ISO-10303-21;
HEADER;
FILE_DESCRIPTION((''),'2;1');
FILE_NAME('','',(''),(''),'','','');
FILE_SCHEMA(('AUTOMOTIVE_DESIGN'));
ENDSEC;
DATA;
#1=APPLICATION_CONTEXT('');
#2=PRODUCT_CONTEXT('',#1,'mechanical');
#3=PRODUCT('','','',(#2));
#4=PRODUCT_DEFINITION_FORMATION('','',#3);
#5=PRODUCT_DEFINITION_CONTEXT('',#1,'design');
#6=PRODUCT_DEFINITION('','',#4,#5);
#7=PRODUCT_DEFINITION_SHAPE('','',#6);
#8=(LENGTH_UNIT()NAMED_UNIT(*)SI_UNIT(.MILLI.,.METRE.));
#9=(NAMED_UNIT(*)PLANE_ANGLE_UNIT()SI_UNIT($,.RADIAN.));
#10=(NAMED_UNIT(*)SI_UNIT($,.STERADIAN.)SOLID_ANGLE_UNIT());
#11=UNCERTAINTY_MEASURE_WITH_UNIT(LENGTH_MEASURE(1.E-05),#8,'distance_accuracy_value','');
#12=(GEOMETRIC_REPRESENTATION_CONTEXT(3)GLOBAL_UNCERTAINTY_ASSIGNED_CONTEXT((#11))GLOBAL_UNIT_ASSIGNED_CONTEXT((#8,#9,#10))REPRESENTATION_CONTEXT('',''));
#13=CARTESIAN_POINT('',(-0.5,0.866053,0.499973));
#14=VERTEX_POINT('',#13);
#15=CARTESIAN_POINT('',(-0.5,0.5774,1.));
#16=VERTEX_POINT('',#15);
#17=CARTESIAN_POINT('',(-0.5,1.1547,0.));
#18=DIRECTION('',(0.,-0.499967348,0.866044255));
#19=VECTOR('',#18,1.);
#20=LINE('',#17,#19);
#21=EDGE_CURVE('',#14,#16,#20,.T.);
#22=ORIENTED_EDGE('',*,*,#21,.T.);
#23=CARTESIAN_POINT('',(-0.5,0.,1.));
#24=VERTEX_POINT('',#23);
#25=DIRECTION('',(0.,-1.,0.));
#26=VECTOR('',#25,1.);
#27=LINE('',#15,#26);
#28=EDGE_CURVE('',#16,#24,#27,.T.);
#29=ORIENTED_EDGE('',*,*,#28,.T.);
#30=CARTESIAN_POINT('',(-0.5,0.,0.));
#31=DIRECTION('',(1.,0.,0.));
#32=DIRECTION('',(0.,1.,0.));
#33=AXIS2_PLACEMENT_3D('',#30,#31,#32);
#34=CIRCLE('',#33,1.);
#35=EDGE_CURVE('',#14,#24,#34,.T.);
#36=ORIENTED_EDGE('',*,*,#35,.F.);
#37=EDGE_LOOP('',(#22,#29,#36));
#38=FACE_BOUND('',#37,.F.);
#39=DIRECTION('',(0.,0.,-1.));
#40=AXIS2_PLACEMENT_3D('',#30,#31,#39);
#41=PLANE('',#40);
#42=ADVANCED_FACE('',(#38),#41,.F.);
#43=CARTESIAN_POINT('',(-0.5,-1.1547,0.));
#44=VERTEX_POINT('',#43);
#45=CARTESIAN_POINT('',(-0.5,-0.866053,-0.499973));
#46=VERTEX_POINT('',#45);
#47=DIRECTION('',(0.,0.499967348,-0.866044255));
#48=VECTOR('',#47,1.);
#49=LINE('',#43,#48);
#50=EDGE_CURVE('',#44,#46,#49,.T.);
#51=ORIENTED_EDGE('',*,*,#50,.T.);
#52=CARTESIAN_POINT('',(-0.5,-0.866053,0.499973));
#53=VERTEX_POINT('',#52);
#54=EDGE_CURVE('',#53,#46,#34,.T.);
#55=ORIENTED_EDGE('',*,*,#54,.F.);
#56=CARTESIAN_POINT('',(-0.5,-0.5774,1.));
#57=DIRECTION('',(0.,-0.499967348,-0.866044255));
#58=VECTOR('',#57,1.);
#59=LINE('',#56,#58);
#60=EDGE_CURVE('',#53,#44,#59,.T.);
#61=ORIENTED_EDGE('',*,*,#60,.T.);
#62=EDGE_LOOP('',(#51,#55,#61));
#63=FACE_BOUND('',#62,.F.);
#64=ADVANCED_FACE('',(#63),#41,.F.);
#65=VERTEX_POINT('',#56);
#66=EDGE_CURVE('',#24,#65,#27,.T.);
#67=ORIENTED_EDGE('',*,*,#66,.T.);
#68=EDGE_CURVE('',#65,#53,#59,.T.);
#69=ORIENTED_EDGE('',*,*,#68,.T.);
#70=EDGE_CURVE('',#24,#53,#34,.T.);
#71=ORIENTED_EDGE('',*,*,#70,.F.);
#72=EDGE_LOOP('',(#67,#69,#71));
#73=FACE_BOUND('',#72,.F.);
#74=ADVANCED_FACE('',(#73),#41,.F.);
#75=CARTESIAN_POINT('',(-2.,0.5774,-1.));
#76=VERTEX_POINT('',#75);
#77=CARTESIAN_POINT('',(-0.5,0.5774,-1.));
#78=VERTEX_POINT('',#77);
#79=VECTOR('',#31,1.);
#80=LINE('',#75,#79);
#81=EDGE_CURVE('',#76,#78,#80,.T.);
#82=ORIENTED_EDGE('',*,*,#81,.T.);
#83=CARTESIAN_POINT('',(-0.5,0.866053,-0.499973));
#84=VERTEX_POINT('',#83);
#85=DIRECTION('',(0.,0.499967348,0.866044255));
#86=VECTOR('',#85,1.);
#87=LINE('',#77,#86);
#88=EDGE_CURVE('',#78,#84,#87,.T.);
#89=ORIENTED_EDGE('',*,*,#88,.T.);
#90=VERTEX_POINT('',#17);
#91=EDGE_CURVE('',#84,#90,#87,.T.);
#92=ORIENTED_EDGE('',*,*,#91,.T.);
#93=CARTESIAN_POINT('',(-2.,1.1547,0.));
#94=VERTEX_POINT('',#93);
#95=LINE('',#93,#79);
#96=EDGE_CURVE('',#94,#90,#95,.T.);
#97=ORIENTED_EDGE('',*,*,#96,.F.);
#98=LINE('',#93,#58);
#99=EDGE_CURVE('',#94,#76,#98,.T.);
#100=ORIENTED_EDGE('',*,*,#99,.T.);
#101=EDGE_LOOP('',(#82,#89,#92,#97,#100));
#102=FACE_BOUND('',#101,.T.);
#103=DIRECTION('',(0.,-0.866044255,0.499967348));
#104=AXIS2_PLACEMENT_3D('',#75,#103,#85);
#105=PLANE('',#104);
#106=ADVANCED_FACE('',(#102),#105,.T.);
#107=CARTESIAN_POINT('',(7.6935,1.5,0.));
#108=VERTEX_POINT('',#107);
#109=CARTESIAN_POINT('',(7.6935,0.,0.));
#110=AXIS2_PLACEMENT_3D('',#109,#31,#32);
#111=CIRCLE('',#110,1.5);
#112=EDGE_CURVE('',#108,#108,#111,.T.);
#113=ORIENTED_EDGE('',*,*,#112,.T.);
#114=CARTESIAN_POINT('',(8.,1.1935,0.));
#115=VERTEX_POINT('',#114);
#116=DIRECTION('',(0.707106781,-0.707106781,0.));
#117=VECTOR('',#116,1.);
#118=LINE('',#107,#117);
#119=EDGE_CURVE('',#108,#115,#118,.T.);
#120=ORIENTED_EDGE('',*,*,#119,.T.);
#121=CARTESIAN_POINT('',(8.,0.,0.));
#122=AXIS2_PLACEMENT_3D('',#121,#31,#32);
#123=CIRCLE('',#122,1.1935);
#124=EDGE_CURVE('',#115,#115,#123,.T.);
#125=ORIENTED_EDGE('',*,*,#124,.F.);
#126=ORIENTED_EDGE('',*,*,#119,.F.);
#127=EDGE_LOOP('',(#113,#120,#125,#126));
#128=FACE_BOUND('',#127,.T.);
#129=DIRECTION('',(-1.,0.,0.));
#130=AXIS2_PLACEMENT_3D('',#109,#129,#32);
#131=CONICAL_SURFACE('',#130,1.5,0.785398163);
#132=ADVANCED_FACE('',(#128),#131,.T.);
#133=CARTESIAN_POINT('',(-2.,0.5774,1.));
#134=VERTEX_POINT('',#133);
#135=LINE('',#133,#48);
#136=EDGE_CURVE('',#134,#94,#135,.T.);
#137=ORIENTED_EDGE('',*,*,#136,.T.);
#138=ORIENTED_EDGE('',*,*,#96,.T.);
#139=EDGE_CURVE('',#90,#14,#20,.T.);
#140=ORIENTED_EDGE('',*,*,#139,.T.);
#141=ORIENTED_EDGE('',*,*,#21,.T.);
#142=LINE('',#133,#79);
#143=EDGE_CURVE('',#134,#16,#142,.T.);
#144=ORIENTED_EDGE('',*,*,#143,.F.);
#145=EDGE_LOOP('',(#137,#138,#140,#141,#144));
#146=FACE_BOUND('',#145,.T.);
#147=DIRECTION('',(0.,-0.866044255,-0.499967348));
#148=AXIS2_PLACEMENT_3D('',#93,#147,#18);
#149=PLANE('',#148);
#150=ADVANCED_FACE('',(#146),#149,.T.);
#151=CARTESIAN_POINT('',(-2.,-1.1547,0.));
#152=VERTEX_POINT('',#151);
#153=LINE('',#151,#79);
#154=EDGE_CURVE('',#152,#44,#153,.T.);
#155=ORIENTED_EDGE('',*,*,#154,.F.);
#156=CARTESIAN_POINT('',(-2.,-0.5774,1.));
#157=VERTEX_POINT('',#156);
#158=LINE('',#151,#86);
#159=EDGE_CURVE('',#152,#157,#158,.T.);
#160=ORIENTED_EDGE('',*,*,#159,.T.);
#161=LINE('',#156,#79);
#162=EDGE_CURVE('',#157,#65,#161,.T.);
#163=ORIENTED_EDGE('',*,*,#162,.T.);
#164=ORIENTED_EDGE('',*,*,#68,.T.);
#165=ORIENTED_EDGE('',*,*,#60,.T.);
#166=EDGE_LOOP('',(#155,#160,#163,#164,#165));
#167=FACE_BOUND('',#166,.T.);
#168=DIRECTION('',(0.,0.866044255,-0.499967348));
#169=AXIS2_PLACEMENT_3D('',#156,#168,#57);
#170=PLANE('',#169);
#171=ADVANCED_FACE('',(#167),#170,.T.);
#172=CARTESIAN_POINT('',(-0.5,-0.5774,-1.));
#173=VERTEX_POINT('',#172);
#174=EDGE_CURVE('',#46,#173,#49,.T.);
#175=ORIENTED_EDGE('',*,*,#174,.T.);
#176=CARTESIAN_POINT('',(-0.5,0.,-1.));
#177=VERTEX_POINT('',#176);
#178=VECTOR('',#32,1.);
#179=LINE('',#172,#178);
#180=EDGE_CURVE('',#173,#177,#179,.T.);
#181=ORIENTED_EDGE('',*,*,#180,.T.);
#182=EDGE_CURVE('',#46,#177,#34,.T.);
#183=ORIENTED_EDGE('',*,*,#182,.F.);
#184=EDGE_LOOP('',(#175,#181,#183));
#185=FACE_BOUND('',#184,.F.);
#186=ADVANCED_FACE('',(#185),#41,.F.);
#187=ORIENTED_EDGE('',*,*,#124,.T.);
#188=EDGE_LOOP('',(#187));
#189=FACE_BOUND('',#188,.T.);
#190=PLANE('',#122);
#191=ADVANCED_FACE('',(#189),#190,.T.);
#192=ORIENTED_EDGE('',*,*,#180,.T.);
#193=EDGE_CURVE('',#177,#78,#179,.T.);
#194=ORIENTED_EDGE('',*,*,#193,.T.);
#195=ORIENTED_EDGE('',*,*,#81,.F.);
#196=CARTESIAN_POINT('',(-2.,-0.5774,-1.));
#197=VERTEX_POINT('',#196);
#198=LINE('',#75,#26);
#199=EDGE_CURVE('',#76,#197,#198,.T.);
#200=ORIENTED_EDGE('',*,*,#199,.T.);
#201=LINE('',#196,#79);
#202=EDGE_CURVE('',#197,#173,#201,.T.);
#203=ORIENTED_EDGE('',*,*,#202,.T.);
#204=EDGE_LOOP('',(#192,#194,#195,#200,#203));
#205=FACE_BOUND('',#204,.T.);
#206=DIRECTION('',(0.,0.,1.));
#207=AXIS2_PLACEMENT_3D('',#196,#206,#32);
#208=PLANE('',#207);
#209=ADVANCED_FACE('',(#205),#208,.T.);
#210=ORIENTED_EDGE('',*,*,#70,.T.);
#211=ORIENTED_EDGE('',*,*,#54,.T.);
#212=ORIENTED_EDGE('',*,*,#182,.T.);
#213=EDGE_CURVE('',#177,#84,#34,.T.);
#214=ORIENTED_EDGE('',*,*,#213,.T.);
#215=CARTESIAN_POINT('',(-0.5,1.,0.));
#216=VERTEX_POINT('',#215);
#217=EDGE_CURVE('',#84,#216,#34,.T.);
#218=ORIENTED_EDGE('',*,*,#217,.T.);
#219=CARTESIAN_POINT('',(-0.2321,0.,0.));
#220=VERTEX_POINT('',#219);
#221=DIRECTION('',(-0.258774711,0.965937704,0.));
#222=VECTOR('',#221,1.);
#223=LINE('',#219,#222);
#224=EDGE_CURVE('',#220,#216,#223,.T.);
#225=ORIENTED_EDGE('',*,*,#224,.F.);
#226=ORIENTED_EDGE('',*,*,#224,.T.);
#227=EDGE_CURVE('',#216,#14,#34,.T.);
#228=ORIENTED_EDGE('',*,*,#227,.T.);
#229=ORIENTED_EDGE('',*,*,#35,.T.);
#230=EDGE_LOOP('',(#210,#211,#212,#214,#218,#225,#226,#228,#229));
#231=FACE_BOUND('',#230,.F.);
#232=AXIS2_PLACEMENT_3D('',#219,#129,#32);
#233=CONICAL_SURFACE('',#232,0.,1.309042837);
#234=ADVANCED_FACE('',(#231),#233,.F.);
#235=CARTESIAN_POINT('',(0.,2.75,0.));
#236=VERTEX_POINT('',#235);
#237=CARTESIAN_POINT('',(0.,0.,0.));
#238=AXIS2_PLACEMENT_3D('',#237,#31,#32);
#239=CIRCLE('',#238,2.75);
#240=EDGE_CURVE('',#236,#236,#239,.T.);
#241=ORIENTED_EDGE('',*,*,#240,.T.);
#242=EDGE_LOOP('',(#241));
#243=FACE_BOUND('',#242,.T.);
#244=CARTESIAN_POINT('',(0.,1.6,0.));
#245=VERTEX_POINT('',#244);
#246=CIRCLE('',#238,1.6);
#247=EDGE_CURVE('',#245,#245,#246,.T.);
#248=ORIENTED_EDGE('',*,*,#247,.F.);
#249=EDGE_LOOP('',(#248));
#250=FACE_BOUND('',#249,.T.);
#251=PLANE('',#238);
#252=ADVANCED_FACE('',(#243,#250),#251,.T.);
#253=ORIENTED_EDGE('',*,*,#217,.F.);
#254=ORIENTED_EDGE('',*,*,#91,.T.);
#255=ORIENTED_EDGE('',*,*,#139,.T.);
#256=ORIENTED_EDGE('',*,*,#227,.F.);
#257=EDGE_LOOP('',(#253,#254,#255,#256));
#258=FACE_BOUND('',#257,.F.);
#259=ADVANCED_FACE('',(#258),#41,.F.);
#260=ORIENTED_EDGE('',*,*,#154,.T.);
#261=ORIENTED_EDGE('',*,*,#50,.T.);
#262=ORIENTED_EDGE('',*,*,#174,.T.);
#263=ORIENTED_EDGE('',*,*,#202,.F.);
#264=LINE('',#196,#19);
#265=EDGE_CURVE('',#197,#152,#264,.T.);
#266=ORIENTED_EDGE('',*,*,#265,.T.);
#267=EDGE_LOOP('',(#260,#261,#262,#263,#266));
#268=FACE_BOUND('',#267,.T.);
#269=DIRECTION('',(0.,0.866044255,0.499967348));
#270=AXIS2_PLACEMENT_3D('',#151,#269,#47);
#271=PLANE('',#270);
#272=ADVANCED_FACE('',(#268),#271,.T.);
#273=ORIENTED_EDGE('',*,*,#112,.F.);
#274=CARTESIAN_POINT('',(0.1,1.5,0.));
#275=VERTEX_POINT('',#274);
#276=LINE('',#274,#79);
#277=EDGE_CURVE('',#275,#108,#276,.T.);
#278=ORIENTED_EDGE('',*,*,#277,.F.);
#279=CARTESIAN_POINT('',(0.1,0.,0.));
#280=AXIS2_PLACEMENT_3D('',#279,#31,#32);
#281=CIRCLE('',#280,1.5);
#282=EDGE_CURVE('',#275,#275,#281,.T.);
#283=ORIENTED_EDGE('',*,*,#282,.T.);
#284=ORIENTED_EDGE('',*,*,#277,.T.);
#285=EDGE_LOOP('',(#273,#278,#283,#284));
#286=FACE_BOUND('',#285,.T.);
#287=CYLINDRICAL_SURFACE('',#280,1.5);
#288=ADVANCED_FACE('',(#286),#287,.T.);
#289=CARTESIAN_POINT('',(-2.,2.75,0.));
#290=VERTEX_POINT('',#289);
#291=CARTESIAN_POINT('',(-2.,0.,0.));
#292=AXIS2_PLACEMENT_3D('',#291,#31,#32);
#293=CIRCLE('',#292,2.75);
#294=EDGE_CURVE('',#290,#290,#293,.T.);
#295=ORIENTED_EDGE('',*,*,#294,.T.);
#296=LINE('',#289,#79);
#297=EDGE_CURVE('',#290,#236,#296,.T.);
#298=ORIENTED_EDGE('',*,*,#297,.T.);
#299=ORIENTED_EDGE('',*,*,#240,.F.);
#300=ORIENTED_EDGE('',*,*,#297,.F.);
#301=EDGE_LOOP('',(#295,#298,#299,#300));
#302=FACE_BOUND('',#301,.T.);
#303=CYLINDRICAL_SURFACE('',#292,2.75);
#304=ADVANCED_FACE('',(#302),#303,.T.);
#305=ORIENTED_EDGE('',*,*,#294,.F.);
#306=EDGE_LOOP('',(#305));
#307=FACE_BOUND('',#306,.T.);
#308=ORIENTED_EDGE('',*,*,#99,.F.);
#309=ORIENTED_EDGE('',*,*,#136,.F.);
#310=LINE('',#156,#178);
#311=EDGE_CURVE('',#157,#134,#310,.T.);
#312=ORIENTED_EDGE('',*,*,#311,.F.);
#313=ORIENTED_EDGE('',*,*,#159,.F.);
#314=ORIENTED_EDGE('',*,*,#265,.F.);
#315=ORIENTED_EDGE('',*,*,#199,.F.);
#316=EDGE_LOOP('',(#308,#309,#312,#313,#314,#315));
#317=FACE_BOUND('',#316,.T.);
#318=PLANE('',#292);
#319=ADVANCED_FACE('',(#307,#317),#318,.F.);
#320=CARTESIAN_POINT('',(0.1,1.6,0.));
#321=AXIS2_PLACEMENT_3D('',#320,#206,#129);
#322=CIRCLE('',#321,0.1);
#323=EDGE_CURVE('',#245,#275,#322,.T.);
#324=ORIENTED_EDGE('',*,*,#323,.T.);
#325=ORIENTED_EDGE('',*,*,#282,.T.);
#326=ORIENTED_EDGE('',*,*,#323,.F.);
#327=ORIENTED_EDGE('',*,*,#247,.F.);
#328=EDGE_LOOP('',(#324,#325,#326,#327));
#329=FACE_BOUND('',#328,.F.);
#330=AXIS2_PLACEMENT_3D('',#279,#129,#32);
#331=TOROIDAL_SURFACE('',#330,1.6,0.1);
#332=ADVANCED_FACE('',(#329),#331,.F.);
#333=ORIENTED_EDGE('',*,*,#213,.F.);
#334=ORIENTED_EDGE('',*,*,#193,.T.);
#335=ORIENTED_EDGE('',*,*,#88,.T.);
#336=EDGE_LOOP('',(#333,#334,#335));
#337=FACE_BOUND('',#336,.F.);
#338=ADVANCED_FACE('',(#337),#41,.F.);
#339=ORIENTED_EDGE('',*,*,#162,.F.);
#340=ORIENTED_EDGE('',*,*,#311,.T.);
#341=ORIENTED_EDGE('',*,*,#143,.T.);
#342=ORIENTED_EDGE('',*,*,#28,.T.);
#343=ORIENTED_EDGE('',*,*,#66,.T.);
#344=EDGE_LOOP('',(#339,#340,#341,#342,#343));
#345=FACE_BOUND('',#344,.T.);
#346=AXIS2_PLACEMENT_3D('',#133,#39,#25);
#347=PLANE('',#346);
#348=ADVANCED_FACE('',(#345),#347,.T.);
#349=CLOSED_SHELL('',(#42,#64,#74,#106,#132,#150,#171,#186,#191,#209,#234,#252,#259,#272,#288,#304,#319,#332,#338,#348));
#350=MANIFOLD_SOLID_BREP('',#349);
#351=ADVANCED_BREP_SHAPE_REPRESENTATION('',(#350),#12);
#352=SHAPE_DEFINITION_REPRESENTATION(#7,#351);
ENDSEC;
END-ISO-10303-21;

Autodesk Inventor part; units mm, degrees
ref_plane "YZ Plane" through (0, 0, 0) normal (1, 0, 0) x (0, 1, 0)
ref_plane "XZ Plane" through (0, 0, 0) normal (0, 1, 0) x (-1, 0, 0)
ref_plane "XY Plane" through (0, 0, 0) normal (0, 0, 1) x (1, 0, 0)
sketch "Sketch_1" plane through (0, 0, 0) normal (0, 0, 1) x (1, 0, 0)
  line L0 (8, 0) -> (-0.2321, 0)
  line L1 (-0.2321, 0) -> (-0.5, 1)
  line L2 (-0.5, 1) -> (-2, 1)
  line L3 (-2, 1) -> (-2, 2.75)
  line L4 (-2, 2.75) -> (0, 2.75)
  line L5 (0, 2.75) -> (0, 1.6)
  arc A0 (0, 1.6) -> (0.1, 1.5) centre (0.1, 1.6) ccw
  line L6 (0.1, 1.5) -> (7.6935, 1.5)
  line L7 (7.6935, 1.5) -> (8, 1.1935)
  line L8 (8, 1.1935) -> (8, 0)
  line L9 (8, 0) -> (-0.2321, 0)
revolve "Revolution1" add sketch "Sketch_1" angle 360 about axis through (8, 0, 0) along (1, 0, 0)
thread "Thread1" size "M3x0.5" class "6g" standard "ANSI Metric M Profile" length 7.0626
sketch "Sketch_2" plane through (-2, 0, 0) normal (1, 0, 0) x (0, 0, -1)
  line L0 (-1, -0.5774) -> (0, -1.1547)
  line L1 (0, -1.1547) -> (1, -0.5774)
  line L2 (1, -0.5774) -> (1, 0.5774)
  line L3 (1, 0.5774) -> (0, 1.1547)
  line L4 (0, 1.1547) -> (-1, 0.5774)
  line L5 (-1, 0.5774) -> (-1, -0.5774)
extrude "Extrusion1" cut sketch "Sketch_2" along normal blind 1.5
properties part number "CBSH3-8" material "鋼"
